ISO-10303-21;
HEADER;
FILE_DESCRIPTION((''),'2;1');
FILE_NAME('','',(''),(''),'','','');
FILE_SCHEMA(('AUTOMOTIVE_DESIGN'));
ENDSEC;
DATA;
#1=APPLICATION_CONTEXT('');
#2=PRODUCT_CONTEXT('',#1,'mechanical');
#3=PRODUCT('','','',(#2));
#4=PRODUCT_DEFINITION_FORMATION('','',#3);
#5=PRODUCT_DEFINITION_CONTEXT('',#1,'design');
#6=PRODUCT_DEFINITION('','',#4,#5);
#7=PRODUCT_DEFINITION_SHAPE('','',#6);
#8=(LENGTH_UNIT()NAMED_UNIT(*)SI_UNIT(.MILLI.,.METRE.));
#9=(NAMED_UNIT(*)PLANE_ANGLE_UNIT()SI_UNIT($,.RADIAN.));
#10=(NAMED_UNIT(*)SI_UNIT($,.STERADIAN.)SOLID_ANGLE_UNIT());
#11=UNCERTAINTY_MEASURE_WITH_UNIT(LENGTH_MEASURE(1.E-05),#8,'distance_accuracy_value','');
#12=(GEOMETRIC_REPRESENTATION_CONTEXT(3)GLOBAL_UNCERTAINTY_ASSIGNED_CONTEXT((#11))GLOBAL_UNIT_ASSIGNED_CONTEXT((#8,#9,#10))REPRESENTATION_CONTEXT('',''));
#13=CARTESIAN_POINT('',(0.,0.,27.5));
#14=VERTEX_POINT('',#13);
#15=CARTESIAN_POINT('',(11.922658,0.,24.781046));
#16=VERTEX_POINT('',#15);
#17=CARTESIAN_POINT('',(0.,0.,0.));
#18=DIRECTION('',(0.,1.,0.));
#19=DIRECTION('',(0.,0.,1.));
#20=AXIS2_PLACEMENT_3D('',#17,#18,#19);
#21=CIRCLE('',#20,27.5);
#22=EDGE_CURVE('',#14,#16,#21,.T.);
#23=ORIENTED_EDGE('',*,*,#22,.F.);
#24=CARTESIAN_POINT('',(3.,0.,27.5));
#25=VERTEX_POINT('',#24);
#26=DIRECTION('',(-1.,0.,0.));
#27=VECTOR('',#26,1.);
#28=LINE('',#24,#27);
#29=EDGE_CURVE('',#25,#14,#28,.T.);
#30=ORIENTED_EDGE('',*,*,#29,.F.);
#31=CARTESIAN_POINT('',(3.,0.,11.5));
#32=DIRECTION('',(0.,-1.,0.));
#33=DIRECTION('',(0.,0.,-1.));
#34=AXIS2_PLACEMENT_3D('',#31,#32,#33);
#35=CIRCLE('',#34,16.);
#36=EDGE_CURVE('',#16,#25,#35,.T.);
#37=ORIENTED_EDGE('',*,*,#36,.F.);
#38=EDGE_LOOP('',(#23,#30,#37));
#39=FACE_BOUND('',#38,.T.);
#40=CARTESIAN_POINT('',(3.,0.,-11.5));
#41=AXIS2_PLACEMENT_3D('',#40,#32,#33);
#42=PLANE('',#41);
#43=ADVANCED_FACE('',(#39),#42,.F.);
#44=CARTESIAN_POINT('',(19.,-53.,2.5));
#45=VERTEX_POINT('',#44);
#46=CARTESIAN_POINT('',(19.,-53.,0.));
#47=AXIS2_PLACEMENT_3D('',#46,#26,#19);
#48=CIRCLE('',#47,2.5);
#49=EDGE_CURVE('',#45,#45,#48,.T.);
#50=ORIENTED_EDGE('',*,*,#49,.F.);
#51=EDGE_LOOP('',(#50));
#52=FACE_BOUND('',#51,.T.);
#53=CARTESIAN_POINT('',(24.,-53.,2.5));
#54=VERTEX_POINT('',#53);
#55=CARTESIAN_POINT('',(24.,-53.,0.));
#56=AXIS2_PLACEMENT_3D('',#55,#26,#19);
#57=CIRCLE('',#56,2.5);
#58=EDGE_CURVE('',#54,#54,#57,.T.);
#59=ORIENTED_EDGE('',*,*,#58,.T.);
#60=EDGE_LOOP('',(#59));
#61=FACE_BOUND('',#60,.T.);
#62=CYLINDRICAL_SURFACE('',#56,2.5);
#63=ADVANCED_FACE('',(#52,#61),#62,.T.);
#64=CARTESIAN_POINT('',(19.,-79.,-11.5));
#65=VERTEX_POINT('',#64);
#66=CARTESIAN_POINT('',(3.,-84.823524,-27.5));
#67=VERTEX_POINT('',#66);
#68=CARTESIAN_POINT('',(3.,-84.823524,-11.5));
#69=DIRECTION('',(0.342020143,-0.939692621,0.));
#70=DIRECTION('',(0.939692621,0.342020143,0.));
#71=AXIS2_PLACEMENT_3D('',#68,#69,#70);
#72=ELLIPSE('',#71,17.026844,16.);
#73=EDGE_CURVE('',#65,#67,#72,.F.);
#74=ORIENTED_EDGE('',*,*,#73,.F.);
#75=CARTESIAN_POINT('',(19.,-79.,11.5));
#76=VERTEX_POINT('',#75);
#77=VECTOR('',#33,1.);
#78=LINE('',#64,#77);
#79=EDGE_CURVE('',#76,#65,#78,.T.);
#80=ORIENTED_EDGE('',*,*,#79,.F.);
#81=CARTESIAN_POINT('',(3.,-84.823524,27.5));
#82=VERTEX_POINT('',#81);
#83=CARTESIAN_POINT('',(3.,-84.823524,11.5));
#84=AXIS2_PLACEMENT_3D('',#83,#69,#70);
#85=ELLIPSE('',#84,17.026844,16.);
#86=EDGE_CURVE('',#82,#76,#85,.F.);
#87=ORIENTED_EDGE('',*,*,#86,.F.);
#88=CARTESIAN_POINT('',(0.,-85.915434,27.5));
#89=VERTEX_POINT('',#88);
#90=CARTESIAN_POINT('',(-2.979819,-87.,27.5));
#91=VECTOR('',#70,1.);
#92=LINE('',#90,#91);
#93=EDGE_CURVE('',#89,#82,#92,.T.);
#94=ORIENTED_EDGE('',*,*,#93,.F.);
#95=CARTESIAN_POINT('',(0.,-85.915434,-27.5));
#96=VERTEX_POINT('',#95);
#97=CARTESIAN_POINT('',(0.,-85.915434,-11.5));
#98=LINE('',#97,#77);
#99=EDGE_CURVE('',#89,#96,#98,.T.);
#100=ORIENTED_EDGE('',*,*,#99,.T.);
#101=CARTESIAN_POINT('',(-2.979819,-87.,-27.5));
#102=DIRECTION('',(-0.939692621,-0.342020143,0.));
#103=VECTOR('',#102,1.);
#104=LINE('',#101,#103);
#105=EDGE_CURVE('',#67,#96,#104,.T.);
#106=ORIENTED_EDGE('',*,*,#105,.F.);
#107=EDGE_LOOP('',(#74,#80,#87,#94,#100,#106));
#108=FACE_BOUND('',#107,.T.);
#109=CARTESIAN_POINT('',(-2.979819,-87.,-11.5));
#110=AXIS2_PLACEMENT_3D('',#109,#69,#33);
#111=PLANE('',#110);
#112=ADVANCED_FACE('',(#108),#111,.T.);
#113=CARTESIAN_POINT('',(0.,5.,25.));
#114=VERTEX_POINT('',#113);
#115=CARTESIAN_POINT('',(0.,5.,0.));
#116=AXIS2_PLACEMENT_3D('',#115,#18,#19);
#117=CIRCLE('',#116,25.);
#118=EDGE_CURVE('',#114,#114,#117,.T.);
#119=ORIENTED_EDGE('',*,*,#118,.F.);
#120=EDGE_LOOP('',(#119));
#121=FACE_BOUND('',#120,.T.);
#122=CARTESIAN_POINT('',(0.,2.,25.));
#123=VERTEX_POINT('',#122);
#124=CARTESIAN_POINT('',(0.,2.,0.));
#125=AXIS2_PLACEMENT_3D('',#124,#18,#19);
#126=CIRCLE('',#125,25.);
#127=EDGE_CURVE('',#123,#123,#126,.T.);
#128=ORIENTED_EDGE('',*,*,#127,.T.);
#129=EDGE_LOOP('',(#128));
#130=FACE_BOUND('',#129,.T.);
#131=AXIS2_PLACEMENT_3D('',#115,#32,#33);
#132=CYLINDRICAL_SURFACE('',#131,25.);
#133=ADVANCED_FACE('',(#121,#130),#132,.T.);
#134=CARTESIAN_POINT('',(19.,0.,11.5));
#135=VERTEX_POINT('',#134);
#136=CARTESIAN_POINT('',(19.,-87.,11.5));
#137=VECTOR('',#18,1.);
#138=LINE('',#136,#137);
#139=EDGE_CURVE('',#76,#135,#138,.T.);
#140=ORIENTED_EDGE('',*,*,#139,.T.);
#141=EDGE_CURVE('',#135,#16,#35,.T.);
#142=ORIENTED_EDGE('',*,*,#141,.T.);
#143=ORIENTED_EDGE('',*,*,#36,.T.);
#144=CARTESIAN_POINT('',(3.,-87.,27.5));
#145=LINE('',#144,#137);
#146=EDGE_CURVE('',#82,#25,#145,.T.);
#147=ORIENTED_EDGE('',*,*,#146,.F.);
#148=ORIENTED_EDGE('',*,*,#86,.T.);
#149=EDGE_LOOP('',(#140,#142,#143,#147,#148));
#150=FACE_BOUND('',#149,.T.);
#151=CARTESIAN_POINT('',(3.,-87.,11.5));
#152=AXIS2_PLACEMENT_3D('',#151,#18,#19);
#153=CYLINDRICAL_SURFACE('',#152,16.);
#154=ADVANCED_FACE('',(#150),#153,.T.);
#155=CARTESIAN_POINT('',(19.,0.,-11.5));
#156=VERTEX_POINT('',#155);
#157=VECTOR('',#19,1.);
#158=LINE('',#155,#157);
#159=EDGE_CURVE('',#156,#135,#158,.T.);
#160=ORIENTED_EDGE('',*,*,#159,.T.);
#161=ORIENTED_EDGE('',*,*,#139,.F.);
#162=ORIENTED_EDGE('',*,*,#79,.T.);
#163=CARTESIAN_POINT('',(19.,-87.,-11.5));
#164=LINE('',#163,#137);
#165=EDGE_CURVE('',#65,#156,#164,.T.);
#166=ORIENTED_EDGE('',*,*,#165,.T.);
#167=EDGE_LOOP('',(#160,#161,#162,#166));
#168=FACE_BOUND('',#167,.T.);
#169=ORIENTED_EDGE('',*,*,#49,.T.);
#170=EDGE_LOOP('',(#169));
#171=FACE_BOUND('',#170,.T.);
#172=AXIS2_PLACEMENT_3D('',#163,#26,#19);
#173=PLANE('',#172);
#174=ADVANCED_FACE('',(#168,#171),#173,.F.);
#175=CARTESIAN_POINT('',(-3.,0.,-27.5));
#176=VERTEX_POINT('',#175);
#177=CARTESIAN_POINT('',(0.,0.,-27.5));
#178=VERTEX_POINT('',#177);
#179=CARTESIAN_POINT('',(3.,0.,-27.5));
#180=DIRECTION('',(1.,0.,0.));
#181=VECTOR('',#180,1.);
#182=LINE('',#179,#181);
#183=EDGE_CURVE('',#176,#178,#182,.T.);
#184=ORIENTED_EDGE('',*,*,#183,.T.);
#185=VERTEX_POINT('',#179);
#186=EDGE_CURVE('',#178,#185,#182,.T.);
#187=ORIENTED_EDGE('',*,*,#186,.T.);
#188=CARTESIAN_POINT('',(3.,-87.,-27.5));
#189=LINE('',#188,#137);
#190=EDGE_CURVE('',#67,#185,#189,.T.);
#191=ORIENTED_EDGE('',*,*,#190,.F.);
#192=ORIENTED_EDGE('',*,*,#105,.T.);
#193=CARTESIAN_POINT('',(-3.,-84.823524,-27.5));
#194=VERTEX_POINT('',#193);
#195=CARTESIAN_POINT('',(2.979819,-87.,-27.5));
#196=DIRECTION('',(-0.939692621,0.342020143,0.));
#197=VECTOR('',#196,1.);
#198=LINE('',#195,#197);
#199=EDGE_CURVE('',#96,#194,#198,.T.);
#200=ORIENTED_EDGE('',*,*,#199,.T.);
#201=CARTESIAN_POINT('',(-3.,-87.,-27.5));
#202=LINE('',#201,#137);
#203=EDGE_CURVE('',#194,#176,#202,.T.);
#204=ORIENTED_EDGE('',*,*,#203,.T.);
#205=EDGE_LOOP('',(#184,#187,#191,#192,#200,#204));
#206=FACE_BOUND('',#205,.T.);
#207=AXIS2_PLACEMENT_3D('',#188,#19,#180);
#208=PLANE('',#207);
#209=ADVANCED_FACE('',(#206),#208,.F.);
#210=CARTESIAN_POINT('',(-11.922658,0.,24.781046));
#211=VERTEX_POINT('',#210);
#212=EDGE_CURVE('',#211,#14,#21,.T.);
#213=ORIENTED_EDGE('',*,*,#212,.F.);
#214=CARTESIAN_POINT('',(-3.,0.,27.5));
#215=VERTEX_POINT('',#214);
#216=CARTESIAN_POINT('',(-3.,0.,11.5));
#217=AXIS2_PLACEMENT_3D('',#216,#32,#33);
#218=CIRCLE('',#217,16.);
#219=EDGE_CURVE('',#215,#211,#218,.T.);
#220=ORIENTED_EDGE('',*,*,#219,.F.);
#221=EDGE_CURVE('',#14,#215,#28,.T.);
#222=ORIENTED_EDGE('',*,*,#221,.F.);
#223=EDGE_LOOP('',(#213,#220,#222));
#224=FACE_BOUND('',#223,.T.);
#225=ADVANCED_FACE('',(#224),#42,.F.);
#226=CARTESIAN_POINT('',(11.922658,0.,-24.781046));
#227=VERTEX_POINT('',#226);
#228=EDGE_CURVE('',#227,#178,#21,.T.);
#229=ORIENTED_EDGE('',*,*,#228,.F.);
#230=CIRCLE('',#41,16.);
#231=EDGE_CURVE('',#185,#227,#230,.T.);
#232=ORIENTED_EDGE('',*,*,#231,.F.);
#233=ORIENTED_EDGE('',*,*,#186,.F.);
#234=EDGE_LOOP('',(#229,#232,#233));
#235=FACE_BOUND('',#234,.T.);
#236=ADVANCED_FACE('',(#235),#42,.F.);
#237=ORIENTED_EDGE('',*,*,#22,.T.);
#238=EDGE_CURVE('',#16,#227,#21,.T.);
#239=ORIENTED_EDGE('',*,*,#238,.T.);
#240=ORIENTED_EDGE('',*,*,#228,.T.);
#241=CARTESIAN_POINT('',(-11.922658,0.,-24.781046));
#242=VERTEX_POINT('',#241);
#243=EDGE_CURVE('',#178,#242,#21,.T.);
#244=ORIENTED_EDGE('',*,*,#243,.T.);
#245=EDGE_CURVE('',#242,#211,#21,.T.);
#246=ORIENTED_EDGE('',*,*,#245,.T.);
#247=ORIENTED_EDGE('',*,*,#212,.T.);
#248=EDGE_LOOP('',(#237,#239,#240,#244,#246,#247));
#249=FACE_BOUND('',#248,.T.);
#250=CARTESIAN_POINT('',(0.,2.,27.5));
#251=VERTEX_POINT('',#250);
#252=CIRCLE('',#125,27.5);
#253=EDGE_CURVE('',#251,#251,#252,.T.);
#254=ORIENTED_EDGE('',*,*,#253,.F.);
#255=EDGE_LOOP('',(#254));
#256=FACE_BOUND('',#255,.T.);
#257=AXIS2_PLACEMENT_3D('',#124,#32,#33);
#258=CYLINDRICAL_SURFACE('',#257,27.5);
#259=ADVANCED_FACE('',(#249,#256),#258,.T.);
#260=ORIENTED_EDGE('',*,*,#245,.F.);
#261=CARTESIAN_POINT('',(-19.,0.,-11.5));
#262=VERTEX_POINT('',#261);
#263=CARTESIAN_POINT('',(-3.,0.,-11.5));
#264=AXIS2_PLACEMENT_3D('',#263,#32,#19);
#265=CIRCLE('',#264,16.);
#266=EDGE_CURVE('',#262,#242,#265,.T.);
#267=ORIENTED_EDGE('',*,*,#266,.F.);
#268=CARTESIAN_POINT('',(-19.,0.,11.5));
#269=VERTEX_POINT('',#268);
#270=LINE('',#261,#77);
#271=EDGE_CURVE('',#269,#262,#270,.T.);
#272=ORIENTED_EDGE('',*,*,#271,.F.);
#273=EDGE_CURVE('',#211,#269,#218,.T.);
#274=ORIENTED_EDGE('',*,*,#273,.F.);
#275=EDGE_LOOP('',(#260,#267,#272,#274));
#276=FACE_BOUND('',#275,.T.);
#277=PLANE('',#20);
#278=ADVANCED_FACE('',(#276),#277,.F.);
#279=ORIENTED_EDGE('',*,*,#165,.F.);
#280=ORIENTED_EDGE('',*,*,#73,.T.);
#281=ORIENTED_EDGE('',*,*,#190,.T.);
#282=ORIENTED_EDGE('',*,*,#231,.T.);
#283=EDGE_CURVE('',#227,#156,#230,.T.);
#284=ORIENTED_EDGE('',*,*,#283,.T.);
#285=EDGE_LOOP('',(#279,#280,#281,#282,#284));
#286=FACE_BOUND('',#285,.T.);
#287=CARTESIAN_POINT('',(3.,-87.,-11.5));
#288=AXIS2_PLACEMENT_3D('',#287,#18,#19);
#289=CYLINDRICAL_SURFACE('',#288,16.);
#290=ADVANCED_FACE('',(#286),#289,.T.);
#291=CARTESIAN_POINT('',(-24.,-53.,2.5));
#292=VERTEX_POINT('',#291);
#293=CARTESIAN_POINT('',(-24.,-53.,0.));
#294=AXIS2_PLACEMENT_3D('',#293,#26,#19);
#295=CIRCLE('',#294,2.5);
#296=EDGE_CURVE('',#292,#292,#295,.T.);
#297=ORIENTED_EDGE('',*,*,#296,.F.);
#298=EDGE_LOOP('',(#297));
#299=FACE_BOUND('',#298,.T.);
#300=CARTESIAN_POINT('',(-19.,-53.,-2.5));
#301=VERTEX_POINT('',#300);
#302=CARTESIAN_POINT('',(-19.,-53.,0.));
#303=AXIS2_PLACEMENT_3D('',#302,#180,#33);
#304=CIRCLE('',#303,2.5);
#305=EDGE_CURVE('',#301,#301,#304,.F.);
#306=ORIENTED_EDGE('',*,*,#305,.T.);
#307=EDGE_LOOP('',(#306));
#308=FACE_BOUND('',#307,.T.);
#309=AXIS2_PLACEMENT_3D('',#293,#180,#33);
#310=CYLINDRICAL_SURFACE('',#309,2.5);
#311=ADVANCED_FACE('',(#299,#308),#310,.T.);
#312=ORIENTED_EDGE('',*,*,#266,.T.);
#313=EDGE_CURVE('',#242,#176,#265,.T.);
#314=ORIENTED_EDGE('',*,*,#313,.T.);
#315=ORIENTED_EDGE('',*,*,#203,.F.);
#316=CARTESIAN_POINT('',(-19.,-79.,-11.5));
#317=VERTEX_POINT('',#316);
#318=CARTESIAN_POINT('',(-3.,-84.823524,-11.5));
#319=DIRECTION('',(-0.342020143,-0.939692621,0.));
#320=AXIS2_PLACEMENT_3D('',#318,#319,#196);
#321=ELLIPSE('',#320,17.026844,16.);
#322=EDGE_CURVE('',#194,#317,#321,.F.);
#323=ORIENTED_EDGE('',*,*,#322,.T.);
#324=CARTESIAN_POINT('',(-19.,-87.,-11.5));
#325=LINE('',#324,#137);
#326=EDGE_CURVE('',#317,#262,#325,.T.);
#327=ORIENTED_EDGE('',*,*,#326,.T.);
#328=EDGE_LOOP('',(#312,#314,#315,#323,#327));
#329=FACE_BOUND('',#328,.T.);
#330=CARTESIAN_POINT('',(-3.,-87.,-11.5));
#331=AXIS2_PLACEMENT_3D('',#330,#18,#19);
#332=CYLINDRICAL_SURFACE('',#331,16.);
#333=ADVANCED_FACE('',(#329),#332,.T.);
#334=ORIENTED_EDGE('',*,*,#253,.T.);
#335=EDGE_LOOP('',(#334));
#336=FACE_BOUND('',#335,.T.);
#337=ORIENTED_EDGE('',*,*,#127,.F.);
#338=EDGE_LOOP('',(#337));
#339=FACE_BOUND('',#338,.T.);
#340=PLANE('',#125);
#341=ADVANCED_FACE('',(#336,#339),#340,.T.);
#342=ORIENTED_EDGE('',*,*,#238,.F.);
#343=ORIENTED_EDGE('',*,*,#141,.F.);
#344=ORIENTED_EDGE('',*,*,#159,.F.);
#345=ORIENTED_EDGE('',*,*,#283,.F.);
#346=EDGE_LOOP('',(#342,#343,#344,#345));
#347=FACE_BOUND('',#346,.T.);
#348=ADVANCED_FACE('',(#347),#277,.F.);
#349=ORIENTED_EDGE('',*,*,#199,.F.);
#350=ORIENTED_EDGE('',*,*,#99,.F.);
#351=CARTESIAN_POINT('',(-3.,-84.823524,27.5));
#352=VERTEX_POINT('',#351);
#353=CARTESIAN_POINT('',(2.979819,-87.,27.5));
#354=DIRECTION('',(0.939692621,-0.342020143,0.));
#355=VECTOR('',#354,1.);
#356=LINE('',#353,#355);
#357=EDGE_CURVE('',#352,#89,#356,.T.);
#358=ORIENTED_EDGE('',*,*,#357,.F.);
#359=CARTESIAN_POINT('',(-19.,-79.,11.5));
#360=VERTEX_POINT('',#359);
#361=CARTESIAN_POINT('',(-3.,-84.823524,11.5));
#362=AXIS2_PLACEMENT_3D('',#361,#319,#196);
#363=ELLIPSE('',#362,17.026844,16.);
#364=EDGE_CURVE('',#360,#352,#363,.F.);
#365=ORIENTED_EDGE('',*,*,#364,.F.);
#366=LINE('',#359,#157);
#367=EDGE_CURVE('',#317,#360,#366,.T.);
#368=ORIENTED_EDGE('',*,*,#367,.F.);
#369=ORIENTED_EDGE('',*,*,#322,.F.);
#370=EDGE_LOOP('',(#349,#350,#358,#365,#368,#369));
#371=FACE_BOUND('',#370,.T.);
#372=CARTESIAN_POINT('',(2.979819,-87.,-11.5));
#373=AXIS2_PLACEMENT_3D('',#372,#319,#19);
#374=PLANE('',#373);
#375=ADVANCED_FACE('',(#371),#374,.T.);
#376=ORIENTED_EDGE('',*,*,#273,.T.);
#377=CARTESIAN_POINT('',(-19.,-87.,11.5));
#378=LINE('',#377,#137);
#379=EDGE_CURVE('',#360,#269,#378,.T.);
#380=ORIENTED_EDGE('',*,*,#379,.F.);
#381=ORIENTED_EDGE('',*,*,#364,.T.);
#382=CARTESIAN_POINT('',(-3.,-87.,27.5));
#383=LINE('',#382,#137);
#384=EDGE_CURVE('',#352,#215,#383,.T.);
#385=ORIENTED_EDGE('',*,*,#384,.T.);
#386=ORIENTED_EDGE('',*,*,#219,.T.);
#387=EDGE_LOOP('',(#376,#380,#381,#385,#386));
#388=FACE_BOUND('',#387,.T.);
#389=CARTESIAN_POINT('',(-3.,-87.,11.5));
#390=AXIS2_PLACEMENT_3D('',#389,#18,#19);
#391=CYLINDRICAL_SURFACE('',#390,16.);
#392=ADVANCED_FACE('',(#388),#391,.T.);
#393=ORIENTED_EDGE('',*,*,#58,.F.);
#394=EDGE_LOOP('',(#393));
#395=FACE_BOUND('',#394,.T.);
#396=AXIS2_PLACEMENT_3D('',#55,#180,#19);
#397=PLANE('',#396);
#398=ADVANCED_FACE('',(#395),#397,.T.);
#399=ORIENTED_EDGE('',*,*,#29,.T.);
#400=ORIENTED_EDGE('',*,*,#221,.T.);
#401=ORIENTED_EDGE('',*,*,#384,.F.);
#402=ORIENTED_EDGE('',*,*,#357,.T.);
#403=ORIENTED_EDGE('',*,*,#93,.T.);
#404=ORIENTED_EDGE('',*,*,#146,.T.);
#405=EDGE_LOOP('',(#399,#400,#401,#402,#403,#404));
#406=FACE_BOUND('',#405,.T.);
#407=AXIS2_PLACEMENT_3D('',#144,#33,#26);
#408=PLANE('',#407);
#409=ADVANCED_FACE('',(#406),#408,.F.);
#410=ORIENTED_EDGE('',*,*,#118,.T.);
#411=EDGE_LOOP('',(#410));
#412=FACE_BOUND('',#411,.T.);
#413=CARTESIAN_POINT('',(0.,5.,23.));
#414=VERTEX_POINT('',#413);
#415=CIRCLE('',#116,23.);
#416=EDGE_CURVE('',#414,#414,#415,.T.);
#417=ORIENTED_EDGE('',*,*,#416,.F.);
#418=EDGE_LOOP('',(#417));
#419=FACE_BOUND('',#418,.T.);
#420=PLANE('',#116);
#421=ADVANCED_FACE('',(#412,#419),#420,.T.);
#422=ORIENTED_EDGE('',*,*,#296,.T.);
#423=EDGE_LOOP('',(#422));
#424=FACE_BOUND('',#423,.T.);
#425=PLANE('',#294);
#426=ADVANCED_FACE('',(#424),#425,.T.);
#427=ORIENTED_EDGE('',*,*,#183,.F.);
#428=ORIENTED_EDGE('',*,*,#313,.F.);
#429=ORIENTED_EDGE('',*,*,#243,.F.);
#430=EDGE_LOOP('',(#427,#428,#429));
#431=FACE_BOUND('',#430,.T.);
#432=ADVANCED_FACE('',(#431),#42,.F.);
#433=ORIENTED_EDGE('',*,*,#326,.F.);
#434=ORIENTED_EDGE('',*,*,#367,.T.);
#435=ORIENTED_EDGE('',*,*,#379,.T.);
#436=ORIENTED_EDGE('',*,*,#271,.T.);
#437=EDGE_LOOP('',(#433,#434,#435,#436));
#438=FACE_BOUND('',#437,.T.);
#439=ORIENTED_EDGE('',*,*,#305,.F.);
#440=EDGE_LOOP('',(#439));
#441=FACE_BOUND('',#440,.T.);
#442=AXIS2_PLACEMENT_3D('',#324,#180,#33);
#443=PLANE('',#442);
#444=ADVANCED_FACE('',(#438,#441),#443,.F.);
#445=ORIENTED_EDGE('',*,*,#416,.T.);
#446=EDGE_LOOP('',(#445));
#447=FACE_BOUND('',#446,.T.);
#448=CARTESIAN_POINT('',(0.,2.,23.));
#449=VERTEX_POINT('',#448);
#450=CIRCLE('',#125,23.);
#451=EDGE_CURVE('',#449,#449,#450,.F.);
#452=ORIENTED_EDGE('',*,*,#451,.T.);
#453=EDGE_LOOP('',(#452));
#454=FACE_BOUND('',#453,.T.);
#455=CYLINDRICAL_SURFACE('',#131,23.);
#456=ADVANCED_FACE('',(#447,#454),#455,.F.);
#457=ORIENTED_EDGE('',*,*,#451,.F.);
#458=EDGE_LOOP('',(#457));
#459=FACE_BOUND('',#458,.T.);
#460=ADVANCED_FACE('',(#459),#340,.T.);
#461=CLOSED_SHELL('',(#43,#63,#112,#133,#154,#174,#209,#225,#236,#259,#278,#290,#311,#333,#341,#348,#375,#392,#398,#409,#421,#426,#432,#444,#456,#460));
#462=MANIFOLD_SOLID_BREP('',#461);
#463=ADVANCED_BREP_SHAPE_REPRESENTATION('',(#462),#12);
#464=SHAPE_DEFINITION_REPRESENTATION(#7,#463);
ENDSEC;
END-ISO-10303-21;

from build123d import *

# Parameters (mm, degrees)
SKETCH1_R           = 27.5
BOSS_EXTRUDE1_DEPTH = 2
SKETCH2_R           = 25
SKETCH2_R_2         = 23
BOSS_EXTRUDE2_DEPTH = 3
BOSS_EXTRUDE3_DEPTH = 87
CHAMFER2_SIZE       = 8
CHAMFER2_SIZE_2     = 21.979819356
SKETCH5_R           = 2.5
BOSS_EXTRUDE4_DEPTH = 5


with BuildPart() as part:
    # Sketch1 → Boss-Extrude1 (new body)
    with BuildSketch(Plane(origin=(0, 0, 0), x_dir=(1, 0, 0), z_dir=(0, 1, 0))):
        with Locations(Location((0, 0, 0), (0, 0, 270))):
            Circle(SKETCH1_R)
    extrude(amount=BOSS_EXTRUDE1_DEPTH)

    # Sketch2 → Boss-Extrude2 (add)
    with BuildSketch(Plane(origin=(0, 2, 0), x_dir=(1, 0, 0), z_dir=(0, 1, 0))):
        with Locations(Location((0, 0, 0), (0, 0, 270))):
            Circle(SKETCH2_R)
        with Locations(Location((0, 0, 0), (0, 0, 270))):
            Circle(SKETCH2_R_2, mode=Mode.SUBTRACT)
    extrude(amount=BOSS_EXTRUDE2_DEPTH)

    # Sketch3 → Boss-Extrude3 (add)
    with BuildSketch(Plane.XZ):
        with BuildLine():
            Line((3, -27.5), (-3, -27.5))
            ThreePointArc((-3, -27.5), (-14.313708499, -22.813708499), (-19, -11.5))
            Line((-19, -11.5), (-19, 11.5))
            ThreePointArc((-19, 11.5), (-14.313708499, 22.813708499), (-3, 27.5))
            Line((-3, 27.5), (3, 27.5))
            ThreePointArc((3, 27.5), (14.313708499, 22.813708499), (19, 11.5))
            Line((19, 11.5), (19, -11.5))
            ThreePointArc((19, -11.5), (14.313708499, -22.813708499), (3, -27.5))
        make_face()
    extrude(amount=BOSS_EXTRUDE3_DEPTH)

    # Chamfer2
    # the kernel refuses this chamfer: 21.979819356, 8 mm, written as the material it takes off along each edge
    with BuildSketch(Plane(origin=(19, -87, 68.519931595), x_dir=(0.0990409022520504, 0.9950833631817486, 0), z_dir=(0, 0, -1)), Plane(origin=(-19, -87, -68.519931595), x_dir=(-0.0990409022520504, 0.9950833631817486, 0), z_dir=(0, 0, 1))) as chamfer2_piece_1:
        Polygon((CHAMFER2_SIZE * 0.995083363182, -CHAMFER2_SIZE * 0.0990409022521), (-CHAMFER2_SIZE_2 * 0.0990409022504, -CHAMFER2_SIZE_2 * 0.995083363165), (0, 0), align=None)
    extrude(amount=137.03986319, mode=Mode.SUBTRACT)

    # Sketch5 → Boss-Extrude4 (add)
    with BuildSketch(Plane.ZY.offset(19)):
        with Locations(Location((0, -53, 0), (0, 0, 180))):
            Circle(SKETCH5_R)
    boss_extrude4 = extrude(amount=BOSS_EXTRUDE4_DEPTH)

    # Mirror1: Boss-Extrude4 across plane
    add(boss_extrude4.mirror(Plane(origin=(0, 0, 0), x_dir=(0, 0, 1), z_dir=(1, 0, 0))))


solid = part.part
